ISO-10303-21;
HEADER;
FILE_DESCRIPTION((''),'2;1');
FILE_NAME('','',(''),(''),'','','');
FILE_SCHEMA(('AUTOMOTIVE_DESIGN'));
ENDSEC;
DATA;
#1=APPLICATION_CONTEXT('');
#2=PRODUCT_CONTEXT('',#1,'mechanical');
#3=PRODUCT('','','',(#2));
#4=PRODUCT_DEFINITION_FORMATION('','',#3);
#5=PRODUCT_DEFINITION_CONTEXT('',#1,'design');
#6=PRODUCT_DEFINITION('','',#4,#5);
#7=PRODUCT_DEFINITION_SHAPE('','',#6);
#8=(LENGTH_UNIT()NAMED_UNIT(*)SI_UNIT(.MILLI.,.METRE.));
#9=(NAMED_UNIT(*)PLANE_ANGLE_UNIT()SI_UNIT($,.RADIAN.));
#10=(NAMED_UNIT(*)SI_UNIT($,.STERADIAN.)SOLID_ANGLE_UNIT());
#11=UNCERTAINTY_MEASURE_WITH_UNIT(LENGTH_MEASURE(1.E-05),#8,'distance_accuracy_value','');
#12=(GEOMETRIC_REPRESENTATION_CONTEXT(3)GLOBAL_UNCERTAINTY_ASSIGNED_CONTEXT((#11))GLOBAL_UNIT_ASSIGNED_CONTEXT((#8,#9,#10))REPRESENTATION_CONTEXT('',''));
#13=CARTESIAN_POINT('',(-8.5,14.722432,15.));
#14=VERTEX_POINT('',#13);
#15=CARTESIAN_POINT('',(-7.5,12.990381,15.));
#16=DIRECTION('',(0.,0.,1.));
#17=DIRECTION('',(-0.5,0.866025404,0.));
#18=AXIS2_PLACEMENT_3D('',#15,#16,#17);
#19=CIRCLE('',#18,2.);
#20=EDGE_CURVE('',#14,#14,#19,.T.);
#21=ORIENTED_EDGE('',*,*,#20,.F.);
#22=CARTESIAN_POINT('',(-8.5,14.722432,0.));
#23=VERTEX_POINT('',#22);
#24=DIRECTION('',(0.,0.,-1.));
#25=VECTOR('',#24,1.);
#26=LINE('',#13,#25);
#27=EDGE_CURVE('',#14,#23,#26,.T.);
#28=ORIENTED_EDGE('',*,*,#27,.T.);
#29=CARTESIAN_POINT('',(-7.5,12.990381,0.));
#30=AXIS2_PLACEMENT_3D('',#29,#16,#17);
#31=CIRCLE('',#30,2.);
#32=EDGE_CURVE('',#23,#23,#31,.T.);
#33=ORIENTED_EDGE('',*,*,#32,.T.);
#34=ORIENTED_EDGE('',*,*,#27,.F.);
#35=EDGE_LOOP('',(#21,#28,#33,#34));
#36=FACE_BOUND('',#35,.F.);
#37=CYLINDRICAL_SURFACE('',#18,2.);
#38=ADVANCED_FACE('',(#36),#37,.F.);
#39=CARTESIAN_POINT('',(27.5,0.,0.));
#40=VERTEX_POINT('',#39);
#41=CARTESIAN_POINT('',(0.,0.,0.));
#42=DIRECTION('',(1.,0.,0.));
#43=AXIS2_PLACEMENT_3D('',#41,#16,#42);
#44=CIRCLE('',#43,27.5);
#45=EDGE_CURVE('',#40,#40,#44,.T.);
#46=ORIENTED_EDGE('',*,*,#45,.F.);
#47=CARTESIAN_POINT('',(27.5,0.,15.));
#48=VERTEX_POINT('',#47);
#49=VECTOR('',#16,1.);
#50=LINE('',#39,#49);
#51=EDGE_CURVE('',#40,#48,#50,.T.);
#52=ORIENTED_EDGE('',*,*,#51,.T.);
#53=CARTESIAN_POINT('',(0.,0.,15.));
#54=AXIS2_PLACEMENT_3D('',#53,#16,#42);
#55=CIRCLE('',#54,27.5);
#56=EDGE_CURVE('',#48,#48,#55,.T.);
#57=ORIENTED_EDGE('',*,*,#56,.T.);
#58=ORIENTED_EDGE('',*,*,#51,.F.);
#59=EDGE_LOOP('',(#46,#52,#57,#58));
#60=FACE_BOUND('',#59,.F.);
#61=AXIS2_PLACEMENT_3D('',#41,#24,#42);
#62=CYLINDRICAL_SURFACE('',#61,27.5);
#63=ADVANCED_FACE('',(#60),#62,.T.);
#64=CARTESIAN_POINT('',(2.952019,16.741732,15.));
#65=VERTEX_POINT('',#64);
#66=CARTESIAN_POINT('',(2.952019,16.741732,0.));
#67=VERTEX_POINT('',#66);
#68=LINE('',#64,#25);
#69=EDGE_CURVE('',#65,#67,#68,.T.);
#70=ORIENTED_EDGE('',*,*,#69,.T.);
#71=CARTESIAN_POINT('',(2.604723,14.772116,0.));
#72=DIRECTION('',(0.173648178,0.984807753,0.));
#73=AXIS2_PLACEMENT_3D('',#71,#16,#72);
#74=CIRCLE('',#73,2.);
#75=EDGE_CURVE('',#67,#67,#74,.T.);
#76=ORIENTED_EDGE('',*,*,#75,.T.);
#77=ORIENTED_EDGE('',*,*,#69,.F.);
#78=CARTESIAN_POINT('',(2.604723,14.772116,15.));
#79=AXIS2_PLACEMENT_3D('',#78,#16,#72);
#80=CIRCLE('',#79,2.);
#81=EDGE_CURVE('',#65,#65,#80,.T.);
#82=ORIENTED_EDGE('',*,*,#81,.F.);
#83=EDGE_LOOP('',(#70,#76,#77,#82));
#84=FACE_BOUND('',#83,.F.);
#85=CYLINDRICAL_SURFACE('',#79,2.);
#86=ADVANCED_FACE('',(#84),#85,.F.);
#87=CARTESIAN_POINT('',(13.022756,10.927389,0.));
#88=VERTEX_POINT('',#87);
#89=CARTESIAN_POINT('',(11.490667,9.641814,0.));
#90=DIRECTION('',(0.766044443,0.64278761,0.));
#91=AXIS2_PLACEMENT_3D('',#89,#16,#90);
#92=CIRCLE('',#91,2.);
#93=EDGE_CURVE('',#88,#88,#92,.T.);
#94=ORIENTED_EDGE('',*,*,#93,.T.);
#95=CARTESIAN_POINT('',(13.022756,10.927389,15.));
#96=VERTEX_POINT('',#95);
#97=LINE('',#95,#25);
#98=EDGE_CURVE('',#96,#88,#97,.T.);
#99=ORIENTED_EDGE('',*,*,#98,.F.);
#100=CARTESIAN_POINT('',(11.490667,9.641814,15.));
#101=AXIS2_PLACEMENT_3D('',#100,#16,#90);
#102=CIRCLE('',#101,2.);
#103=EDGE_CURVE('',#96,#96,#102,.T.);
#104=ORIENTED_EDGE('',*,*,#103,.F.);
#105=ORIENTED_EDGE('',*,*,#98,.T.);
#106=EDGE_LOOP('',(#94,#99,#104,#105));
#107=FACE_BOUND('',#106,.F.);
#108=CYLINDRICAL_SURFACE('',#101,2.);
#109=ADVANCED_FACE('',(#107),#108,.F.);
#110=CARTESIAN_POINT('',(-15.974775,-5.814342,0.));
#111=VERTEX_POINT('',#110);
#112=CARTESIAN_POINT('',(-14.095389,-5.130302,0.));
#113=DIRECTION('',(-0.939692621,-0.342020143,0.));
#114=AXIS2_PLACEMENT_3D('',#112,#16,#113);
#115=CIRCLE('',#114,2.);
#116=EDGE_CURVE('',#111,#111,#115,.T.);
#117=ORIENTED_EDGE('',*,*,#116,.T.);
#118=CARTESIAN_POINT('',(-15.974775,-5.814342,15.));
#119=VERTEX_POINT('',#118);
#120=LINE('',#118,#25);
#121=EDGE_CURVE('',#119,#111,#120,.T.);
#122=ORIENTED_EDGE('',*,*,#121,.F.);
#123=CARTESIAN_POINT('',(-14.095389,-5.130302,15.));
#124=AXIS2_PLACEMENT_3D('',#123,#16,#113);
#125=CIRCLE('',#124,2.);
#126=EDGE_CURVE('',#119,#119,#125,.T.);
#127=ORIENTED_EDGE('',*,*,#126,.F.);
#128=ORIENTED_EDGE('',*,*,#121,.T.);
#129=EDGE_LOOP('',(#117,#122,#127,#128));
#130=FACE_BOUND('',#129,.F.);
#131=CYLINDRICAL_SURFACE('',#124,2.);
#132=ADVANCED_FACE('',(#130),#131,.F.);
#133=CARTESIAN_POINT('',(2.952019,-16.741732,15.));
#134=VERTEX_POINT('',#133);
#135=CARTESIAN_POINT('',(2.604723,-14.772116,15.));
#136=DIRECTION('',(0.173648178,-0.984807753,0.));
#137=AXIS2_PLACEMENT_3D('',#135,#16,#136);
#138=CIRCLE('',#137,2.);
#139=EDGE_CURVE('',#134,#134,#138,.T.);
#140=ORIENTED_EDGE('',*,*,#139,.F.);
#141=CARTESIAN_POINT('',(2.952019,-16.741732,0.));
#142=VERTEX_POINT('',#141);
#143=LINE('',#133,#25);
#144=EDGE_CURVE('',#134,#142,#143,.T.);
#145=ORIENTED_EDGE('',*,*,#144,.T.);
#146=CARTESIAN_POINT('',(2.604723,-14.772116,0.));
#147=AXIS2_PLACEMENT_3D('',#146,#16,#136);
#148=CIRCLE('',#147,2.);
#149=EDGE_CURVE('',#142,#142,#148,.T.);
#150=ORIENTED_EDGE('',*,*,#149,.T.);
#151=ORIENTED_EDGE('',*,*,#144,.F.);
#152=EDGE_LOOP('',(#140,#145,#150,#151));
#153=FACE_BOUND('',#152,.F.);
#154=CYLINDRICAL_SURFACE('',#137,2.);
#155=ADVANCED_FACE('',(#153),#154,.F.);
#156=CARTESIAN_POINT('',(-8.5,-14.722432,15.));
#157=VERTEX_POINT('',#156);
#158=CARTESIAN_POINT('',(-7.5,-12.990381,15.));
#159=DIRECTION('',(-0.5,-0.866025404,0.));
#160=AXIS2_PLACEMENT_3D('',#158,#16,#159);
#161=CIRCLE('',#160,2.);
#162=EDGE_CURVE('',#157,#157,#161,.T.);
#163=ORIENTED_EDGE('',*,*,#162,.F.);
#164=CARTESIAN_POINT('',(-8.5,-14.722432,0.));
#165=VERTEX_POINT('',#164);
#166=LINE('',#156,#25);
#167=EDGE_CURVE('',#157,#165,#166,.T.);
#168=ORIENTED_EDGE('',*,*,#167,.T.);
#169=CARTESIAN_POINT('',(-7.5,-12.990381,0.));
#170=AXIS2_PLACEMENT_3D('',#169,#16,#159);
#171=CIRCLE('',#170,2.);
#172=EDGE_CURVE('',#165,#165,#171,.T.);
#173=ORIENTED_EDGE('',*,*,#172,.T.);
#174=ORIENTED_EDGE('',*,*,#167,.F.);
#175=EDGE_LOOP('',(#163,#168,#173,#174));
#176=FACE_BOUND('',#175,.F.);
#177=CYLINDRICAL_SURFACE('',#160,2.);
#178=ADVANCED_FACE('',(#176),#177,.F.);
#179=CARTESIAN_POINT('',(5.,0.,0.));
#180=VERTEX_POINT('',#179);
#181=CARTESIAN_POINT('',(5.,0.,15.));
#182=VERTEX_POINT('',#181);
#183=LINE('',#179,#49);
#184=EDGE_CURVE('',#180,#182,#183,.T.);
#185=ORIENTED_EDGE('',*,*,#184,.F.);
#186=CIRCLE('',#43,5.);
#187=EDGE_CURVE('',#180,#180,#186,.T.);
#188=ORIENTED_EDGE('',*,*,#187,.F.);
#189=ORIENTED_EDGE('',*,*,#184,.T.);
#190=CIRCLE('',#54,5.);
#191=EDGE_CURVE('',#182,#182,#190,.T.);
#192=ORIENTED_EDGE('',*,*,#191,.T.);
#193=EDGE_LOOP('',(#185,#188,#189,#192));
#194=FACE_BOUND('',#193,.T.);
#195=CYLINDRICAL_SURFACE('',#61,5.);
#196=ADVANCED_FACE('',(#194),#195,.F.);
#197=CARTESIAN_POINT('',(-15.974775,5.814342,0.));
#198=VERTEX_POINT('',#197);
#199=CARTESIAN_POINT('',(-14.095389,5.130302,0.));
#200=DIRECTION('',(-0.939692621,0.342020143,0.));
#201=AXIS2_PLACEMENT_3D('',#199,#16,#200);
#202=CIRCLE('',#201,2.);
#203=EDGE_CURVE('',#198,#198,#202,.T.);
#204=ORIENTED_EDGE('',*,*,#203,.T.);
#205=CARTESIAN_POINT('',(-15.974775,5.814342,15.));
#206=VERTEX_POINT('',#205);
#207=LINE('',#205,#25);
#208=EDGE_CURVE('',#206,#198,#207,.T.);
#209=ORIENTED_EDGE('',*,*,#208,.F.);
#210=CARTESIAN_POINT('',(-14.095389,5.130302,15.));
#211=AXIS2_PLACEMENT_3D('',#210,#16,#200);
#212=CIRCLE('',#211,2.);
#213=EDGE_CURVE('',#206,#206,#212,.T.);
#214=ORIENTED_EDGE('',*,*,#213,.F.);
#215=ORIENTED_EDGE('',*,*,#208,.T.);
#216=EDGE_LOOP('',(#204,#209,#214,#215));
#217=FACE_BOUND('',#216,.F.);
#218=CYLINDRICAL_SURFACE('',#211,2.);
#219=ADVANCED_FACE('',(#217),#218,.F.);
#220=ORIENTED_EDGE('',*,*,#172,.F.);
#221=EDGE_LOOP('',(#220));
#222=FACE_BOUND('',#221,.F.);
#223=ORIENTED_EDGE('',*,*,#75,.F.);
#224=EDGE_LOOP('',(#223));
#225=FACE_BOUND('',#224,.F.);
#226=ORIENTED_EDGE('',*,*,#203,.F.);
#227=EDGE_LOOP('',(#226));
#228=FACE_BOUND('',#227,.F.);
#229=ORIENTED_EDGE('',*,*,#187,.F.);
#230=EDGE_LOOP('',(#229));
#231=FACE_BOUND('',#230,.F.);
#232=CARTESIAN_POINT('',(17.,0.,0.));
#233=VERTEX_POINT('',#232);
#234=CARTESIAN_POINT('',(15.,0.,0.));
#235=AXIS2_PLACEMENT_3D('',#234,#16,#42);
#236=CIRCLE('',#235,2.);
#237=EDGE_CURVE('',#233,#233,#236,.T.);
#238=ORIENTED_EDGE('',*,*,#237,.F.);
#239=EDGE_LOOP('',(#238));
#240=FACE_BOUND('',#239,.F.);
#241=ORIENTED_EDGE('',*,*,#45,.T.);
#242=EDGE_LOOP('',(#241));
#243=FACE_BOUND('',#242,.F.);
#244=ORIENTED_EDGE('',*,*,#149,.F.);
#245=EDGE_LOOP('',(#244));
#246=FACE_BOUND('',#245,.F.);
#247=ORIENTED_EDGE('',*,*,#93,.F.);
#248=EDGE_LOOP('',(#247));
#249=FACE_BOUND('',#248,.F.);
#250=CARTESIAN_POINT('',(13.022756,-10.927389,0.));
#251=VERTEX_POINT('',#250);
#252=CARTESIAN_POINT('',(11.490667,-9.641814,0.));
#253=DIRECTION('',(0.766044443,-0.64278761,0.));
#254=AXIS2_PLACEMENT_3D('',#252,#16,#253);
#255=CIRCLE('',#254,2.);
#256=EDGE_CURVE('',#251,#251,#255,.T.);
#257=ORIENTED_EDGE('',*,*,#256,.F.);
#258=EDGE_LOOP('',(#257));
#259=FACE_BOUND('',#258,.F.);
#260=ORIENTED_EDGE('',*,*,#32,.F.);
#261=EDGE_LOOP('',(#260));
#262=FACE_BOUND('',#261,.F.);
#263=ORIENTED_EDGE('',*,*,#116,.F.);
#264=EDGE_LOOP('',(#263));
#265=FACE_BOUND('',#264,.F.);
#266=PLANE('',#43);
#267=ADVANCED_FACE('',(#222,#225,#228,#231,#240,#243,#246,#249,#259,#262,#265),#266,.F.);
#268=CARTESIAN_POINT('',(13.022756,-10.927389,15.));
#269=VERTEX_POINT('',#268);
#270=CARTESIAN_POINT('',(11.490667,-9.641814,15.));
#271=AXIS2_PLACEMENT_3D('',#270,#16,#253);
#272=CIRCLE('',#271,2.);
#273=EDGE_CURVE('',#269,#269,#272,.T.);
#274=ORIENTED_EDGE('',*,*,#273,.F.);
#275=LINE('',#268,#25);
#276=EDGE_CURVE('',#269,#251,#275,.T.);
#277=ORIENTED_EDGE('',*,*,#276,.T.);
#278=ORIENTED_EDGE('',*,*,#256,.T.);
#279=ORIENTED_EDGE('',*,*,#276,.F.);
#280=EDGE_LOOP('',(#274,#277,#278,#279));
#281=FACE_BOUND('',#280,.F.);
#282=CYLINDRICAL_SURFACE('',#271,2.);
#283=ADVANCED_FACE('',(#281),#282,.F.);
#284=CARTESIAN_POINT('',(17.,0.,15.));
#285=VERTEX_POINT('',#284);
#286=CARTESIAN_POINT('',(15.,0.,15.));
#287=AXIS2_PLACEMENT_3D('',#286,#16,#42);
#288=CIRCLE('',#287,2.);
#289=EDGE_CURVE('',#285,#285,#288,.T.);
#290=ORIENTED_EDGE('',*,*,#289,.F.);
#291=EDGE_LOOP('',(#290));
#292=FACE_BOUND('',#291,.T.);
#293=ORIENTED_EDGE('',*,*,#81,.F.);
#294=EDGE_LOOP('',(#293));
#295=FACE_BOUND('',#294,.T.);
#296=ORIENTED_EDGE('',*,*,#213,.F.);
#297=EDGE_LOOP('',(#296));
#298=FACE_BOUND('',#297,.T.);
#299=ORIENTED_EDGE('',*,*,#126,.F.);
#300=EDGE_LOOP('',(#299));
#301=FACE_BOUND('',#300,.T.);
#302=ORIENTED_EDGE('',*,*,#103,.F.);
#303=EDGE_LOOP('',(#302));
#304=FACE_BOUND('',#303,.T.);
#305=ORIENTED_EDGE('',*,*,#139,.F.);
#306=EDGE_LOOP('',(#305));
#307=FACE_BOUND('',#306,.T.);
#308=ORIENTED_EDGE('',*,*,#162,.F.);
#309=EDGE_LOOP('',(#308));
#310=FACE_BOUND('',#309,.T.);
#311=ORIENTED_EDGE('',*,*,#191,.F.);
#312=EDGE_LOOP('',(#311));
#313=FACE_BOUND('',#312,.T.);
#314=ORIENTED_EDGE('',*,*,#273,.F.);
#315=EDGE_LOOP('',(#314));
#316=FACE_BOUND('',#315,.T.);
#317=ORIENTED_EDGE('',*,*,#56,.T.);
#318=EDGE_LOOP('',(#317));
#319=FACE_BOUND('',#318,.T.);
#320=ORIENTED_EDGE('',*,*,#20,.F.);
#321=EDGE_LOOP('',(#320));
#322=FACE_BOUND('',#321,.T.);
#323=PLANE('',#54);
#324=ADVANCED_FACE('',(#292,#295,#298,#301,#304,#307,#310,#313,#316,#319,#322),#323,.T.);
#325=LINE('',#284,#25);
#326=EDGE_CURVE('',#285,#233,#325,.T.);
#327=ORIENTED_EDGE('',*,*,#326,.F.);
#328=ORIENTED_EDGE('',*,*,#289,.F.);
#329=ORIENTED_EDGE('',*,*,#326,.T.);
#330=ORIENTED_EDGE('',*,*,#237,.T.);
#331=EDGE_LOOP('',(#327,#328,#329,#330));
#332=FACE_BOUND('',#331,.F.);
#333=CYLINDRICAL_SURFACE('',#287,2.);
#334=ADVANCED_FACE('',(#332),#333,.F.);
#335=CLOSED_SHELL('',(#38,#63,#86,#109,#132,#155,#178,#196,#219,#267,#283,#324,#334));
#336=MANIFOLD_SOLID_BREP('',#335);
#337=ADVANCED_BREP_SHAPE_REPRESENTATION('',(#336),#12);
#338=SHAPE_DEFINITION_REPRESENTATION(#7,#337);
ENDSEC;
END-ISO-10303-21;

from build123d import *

# Parameters (mm, degrees)
F0_R            = 27.5
F0_R_2          = 5
F1_DEPTH        = 15
F2_R            = 2
F3_DEPTH        = 15.001
F3_COPIES_COUNT = 9


# Not quite as in the source:
# - a pattern or mirror of a feature is missing from the dataset's text; its kind, count and spacing are read off the source's solid


with BuildPart() as f1:
    # F0 (on Top) → F1 (new body)
    with BuildSketch(Plane.XY):
        Circle(F0_R)
        Circle(F0_R_2, mode=Mode.SUBTRACT)
    extrude(amount=F1_DEPTH)

    # F2 (on face) → F3 (cut, through all)
    with BuildSketch(Plane.XY.offset(15)):
        with Locations((15, 0)):
            Circle(F2_R)
    f3 = extrude(amount=-F3_DEPTH, mode=Mode.SUBTRACT)

    # F3_copies: F3 ×9 about axis
    f3_copies_axis = Axis((0, 0, 0), (0, 0, 1))
    for i in range(1, F3_COPIES_COUNT):
        add(f3.rotate(f3_copies_axis, i * 360 / F3_COPIES_COUNT), mode=Mode.SUBTRACT)


solid = f1.part
